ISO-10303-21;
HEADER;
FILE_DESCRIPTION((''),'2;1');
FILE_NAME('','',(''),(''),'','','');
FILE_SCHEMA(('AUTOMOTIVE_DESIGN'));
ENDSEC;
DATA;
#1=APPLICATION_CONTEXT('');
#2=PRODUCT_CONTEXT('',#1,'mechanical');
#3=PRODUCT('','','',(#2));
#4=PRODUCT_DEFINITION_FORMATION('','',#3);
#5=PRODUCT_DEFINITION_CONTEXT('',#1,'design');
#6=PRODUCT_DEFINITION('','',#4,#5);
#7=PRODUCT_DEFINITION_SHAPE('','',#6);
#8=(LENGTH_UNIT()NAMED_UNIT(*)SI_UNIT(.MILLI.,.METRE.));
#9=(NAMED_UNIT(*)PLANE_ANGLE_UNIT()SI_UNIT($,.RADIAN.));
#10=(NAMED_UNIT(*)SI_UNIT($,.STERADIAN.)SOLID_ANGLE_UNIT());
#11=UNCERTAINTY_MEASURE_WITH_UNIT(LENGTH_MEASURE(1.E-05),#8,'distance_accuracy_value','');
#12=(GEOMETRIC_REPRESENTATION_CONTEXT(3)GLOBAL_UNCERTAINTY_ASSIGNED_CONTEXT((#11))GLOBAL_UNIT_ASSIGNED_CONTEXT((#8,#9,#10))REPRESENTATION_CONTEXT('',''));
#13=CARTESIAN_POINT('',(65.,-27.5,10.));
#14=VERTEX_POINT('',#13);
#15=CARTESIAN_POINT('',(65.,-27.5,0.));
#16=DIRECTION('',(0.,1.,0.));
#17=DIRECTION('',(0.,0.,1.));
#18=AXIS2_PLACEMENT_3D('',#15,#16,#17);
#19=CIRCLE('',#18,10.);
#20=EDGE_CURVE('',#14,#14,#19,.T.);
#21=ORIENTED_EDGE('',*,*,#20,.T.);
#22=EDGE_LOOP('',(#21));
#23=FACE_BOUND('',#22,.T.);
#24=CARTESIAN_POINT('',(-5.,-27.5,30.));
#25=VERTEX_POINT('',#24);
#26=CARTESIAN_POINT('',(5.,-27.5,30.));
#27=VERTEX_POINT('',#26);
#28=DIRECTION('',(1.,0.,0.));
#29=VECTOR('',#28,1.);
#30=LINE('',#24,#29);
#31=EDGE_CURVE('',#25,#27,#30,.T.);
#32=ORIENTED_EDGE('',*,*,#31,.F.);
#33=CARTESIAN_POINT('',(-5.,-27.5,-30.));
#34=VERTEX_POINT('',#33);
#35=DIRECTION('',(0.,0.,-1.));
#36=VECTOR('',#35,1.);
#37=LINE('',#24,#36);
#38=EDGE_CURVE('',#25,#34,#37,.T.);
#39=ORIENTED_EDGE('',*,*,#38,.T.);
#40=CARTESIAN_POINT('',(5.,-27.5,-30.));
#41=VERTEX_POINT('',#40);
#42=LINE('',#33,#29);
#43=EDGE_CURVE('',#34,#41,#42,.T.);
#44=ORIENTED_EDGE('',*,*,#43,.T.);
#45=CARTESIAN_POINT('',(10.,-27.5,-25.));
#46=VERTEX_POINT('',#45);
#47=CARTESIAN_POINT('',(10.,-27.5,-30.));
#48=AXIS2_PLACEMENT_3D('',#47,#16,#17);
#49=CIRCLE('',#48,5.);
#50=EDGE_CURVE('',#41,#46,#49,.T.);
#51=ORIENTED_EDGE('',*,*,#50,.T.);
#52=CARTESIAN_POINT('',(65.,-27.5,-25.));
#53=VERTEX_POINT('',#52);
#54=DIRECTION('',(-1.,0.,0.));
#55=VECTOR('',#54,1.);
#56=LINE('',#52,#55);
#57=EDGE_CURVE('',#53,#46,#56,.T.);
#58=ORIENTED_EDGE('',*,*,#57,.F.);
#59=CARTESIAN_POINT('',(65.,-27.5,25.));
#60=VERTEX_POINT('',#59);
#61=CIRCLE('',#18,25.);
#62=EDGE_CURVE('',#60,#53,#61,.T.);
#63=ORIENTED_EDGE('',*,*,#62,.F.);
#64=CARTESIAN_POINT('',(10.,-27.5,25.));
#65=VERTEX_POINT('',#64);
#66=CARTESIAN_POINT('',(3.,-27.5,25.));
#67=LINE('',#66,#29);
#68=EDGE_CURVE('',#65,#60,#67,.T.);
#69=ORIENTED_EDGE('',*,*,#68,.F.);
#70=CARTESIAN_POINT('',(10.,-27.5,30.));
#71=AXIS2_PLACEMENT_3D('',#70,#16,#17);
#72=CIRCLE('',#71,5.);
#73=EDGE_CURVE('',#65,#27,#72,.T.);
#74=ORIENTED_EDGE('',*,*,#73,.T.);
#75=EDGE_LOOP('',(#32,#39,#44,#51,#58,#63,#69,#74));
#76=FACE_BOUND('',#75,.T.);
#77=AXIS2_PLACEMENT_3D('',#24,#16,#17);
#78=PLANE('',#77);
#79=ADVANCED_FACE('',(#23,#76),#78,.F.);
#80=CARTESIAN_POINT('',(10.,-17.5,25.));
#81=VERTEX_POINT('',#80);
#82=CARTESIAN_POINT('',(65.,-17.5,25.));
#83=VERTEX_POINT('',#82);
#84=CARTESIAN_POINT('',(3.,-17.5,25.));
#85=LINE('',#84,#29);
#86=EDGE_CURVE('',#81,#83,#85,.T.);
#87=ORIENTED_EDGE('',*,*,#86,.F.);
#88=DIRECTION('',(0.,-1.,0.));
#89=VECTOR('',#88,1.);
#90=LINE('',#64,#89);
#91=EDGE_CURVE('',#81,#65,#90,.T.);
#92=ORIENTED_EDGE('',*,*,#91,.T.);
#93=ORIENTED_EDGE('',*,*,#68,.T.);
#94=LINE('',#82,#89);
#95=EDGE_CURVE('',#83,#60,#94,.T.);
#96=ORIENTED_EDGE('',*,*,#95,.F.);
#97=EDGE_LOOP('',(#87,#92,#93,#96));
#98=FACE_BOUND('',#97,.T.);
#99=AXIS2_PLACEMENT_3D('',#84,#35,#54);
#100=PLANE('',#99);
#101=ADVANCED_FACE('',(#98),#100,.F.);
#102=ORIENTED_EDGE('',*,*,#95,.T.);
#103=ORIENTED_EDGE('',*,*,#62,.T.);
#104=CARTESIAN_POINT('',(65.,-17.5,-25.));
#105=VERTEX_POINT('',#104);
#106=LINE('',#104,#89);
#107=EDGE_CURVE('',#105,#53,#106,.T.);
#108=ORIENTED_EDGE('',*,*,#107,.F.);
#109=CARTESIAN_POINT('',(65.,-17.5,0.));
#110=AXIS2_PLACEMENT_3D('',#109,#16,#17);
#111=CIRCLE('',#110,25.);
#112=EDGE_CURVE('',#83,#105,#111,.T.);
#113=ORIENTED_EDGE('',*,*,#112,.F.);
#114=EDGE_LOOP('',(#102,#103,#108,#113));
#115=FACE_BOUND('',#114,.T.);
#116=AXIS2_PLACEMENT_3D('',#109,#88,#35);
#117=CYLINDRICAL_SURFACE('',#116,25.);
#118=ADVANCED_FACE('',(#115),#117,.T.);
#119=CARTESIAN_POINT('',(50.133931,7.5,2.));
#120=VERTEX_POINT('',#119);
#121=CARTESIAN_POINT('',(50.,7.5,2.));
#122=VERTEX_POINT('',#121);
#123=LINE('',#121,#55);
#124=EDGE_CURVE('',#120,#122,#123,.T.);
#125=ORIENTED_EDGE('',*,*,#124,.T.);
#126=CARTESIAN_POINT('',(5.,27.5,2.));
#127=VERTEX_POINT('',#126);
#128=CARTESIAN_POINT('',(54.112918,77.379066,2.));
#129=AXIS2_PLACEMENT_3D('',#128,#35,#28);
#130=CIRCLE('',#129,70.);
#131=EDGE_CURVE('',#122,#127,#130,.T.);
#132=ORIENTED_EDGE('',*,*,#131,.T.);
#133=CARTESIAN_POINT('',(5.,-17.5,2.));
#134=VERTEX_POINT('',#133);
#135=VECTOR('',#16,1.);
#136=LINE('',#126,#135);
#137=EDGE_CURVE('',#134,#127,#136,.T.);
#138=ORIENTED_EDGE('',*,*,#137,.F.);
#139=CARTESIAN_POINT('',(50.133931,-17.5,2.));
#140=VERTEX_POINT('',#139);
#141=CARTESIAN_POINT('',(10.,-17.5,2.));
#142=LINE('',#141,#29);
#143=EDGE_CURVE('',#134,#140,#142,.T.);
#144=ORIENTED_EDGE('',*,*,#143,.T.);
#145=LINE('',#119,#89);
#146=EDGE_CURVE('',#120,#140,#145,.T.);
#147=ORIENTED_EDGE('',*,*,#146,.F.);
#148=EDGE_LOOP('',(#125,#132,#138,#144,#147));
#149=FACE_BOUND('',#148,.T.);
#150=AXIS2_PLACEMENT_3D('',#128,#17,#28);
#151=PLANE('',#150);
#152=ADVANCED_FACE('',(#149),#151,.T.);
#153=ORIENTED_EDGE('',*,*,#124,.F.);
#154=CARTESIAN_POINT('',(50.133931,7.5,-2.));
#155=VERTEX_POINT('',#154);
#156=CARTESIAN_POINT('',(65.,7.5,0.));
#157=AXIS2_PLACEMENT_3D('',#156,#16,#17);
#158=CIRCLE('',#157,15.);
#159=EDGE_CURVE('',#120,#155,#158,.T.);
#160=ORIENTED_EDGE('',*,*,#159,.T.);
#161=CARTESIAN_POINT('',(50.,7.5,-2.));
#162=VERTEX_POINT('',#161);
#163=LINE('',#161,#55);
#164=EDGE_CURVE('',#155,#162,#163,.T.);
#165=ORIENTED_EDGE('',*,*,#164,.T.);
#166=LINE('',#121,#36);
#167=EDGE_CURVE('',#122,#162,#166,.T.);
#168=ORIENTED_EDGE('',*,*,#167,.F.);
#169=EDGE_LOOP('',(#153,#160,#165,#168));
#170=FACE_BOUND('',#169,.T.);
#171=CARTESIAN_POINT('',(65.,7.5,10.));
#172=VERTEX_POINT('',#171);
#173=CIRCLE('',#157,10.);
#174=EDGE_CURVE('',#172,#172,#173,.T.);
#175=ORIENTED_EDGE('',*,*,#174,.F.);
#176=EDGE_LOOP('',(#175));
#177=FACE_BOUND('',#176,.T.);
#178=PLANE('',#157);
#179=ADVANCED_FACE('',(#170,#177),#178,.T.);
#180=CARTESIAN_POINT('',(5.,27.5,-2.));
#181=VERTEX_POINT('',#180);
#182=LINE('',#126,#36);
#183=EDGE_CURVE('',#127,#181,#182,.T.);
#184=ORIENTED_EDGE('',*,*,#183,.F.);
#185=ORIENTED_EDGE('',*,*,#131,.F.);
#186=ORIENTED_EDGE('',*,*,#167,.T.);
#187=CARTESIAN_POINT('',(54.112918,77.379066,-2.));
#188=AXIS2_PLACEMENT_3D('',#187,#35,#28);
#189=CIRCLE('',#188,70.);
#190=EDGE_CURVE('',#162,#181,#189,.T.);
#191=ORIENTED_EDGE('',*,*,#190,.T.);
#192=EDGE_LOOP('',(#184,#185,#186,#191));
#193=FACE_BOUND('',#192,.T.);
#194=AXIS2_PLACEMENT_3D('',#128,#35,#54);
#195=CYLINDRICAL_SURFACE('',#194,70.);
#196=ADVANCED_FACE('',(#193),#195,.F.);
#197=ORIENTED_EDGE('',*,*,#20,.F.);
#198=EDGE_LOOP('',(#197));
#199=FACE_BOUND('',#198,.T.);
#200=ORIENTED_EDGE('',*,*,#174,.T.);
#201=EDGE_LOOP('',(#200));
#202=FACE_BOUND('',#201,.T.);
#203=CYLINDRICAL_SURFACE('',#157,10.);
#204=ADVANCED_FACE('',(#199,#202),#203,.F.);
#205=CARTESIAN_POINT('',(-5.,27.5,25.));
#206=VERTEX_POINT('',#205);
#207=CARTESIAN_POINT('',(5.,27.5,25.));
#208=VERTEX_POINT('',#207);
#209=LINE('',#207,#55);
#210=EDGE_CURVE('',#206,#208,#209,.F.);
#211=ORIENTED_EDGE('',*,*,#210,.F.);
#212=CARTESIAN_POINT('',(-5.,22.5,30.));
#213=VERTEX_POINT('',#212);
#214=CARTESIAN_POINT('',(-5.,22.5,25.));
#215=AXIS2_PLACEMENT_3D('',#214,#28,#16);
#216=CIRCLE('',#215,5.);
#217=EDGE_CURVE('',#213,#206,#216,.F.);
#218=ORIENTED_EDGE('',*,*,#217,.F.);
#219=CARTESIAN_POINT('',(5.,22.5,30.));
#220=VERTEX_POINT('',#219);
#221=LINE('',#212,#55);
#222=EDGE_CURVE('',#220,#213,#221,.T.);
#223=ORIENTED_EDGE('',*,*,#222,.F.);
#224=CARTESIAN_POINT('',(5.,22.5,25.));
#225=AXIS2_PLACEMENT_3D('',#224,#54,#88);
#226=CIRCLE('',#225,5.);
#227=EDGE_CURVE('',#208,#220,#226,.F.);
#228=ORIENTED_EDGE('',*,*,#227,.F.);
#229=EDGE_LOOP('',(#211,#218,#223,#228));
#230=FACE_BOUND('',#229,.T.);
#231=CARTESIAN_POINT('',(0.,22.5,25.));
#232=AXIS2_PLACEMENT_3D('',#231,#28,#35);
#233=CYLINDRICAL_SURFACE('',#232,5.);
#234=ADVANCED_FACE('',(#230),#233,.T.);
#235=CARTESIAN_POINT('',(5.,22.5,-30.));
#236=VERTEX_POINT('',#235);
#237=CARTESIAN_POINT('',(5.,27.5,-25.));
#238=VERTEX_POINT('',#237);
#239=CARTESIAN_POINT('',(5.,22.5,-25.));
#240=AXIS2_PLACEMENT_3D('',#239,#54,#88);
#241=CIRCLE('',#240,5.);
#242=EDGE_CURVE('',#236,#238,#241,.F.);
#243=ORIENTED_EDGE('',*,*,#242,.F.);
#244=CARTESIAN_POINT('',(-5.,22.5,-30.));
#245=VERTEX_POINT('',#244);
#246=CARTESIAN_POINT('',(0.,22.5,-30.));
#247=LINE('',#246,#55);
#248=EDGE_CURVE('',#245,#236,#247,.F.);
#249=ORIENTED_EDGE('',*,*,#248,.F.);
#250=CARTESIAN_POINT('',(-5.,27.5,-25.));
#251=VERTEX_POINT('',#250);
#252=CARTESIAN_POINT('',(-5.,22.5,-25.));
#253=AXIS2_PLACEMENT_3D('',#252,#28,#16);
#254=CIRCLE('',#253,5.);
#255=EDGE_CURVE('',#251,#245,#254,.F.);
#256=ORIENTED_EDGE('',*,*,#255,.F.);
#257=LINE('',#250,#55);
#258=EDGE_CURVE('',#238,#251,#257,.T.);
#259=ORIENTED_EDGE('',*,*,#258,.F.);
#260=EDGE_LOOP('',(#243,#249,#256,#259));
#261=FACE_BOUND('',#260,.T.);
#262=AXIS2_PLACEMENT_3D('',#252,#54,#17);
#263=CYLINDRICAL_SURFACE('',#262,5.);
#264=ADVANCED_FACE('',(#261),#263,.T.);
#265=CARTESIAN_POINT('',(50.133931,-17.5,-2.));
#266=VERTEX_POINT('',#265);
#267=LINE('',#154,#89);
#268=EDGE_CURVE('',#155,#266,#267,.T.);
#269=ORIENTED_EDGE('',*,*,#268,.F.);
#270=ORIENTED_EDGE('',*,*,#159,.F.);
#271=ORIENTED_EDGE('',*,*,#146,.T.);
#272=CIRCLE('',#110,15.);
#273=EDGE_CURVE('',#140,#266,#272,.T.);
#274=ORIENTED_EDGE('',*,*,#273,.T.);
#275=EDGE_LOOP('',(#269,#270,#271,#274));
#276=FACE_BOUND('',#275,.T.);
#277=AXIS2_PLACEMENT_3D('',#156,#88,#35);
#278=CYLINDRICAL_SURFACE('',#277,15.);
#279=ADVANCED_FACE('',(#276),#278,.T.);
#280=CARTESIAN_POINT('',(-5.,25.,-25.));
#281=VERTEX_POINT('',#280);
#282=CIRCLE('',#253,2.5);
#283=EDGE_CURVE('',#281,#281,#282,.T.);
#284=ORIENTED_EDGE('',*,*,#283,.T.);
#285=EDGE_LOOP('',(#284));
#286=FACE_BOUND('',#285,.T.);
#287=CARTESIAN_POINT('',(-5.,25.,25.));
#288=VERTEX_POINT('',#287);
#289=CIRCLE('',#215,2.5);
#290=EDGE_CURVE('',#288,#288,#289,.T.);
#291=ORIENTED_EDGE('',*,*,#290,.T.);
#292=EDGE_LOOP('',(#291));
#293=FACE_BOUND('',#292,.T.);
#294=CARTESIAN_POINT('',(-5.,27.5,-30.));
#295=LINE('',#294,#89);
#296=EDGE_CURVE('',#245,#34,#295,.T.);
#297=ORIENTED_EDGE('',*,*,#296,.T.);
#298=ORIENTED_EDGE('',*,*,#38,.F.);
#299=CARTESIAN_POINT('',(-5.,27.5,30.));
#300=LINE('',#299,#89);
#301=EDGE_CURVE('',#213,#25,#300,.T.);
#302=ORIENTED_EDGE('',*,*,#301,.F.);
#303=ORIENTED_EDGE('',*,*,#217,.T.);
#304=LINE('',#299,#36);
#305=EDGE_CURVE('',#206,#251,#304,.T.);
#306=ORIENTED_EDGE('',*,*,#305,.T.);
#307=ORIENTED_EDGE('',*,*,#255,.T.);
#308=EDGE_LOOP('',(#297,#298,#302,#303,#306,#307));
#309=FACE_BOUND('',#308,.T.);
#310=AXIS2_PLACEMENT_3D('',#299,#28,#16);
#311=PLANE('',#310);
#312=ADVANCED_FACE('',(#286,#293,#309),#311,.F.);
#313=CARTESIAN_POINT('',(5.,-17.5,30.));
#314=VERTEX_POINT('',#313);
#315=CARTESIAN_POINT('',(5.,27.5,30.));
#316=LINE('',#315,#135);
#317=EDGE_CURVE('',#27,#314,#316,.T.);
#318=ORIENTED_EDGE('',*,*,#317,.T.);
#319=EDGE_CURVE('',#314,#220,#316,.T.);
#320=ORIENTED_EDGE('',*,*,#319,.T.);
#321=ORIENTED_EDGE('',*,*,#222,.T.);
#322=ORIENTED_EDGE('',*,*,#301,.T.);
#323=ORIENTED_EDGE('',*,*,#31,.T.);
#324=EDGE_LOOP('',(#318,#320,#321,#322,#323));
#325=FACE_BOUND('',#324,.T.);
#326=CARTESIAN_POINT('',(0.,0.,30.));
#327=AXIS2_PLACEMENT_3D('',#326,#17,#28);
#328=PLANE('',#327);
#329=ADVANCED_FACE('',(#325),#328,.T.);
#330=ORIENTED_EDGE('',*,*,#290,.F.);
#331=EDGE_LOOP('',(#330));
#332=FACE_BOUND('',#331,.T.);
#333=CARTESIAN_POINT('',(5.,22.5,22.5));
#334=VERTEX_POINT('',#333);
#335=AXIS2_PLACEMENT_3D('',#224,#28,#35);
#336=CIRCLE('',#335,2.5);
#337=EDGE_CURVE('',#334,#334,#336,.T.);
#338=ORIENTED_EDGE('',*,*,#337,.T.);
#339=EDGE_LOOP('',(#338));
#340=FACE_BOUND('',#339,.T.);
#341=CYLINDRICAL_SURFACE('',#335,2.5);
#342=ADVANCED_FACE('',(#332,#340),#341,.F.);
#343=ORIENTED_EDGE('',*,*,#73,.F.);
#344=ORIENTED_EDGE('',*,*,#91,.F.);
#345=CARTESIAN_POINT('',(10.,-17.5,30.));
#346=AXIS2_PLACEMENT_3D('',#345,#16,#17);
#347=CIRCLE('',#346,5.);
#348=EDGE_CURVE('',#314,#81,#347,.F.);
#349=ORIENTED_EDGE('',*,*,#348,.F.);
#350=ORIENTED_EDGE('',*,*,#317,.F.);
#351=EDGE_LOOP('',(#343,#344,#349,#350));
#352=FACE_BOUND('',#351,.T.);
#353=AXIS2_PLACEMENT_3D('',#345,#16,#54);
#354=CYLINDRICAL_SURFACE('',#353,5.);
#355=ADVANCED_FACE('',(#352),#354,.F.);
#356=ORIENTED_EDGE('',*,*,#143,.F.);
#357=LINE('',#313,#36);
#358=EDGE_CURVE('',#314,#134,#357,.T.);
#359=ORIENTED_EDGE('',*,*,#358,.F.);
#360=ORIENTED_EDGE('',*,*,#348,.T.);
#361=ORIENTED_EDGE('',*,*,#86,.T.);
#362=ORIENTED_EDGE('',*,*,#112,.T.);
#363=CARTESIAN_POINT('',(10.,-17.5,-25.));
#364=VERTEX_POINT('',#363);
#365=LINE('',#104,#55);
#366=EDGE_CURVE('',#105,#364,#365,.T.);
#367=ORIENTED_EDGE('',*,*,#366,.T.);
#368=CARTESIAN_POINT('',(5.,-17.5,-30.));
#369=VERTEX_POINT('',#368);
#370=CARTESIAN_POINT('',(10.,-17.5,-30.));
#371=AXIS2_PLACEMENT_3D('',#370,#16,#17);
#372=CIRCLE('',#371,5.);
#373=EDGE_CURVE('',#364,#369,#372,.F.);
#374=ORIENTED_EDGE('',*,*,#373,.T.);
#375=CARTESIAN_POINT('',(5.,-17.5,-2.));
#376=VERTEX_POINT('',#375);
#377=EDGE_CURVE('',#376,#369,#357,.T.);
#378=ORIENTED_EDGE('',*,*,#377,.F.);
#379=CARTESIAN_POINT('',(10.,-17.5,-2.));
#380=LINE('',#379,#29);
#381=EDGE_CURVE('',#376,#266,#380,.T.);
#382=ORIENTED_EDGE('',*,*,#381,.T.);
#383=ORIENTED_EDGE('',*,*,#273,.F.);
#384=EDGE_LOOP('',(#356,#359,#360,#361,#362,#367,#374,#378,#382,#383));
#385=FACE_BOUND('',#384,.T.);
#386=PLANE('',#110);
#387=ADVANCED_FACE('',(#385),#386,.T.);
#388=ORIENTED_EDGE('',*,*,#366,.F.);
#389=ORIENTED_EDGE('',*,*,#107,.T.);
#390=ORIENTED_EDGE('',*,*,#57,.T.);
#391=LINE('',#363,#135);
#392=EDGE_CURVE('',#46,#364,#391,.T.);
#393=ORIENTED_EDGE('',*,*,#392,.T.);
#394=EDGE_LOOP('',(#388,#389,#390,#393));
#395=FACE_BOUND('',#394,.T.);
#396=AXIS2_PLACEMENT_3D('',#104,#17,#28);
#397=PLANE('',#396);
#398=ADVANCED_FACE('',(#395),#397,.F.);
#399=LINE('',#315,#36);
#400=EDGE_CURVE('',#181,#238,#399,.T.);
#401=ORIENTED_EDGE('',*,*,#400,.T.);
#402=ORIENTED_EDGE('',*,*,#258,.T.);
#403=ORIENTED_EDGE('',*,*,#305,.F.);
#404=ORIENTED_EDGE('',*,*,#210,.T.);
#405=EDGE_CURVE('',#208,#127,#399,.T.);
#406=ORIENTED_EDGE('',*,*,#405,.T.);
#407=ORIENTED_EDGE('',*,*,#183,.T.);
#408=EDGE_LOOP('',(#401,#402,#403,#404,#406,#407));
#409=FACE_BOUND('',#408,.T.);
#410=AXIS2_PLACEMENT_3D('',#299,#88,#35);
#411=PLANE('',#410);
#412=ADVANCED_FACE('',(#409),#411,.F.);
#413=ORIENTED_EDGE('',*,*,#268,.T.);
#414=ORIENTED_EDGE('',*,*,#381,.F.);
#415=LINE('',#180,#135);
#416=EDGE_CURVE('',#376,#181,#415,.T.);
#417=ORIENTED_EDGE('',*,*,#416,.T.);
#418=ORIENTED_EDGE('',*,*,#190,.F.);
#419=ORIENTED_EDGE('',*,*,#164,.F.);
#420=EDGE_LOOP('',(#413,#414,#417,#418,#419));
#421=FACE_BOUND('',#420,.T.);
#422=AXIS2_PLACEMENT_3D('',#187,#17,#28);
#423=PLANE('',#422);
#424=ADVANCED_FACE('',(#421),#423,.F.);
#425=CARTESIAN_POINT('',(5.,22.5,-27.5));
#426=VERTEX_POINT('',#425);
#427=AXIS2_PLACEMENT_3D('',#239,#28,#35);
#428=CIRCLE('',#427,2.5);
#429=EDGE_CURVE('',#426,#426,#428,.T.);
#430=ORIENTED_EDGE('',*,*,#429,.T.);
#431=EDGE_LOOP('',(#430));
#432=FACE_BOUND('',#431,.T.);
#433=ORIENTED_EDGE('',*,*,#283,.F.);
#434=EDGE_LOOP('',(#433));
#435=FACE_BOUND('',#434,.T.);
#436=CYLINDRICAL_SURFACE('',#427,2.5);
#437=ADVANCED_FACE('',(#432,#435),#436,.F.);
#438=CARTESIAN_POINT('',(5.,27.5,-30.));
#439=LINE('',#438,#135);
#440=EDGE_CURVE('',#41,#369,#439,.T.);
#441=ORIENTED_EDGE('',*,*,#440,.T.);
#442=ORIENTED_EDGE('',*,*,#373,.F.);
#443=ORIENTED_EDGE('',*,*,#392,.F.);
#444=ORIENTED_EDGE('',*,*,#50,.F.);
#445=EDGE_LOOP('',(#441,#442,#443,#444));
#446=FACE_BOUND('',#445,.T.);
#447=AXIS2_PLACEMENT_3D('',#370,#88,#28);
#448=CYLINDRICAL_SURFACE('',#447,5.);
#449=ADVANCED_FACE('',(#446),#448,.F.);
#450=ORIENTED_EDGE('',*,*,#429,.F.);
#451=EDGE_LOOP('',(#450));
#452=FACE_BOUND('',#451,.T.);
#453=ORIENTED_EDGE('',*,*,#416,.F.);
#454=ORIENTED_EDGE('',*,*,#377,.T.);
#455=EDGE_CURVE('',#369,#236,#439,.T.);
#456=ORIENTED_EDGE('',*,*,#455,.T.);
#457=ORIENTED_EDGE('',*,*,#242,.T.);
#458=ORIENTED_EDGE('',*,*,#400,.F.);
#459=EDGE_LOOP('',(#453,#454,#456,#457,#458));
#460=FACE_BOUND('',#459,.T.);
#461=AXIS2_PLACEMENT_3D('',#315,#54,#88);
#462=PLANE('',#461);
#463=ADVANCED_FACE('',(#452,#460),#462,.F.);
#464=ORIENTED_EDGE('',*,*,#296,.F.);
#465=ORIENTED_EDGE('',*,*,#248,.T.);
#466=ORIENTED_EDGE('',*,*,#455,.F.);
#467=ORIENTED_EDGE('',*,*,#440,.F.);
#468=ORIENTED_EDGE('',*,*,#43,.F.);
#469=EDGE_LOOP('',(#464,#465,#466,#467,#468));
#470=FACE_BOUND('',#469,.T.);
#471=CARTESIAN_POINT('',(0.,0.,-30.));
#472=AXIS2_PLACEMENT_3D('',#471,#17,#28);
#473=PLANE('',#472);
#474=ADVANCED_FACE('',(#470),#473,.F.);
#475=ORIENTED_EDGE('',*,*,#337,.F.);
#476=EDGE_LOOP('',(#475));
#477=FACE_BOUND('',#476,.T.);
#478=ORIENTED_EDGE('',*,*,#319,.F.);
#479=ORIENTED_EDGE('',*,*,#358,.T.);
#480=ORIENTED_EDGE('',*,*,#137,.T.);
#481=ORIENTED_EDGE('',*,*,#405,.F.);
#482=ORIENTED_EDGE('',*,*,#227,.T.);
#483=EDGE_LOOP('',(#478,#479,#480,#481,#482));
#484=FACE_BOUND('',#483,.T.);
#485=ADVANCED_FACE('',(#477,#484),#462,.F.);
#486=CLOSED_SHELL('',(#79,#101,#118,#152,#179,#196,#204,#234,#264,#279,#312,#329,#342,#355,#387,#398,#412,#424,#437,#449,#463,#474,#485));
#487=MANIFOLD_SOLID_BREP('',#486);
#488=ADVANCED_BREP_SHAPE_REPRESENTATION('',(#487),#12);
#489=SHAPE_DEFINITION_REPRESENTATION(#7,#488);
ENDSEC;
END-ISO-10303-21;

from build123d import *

# Parameters (mm, degrees)
SKETCH1_W           = 10
SKETCH1_H           = 55
BOSS_EXTRUDE1_DEPTH = 30
BOSS_EXTRUDE2_START = -27.5
BOSS_EXTRUDE2_DEPTH = 10
FILLET3_R           = 5
FILLET4_R           = 5
SKETCH3_R           = 15
BOSS_EXTRUDE3_DEPTH = 25
HOLE1_D             = 20
FILLET5_R           = 5
HOLE2_D             = 5
BOSS_EXTRUDE7_DEPTH = 2


with BuildPart() as part:
    # Sketch1 → Boss-Extrude1 (new, symmetric)
    with BuildSketch(Plane.XY):
        Rectangle(SKETCH1_W, SKETCH1_H)
    extrude(amount=BOSS_EXTRUDE1_DEPTH, both=True)

    # Sketch2 → Boss-Extrude2 (add)
    with BuildSketch(Plane(origin=(0, 0, 0), x_dir=(1, 0, 0), z_dir=(0, 1, 0)).offset(BOSS_EXTRUDE2_START)):
        with BuildLine():
            Line((65, 25), (3, 25))
            Line((3, 25), (3, -25))
            Line((3, -25), (65, -25))
            ThreePointArc((65, -25), (90, 0), (65, 25))
        make_face()
    extrude(amount=BOSS_EXTRUDE2_DEPTH)

    # Fillet3
    fillet3_edges = [part.edges().sort_by_distance(p)[0] for p in [
        (5, -22.5, 25),
    ]]
    fillet(fillet3_edges, radius=FILLET3_R - 0.0001)  # a hair under: the kernel refuses the full size

    # Fillet4
    fillet4_edges = [part.edges().sort_by_distance(p)[0] for p in [
        (5, -22.5, -25),
    ]]
    fillet(fillet4_edges, radius=FILLET4_R - 0.0001)  # a hair under: the kernel refuses the full size

    # Sketch3 → Boss-Extrude3 (add)
    with BuildSketch(Plane(origin=(0, -17.5, 0), x_dir=(1, 0, 0), z_dir=(0, 1, 0))):
        with Locations(Location((65, 0, 0), (0, 0, 270))):
            Circle(SKETCH3_R)
    extrude(amount=BOSS_EXTRUDE3_DEPTH)

    # Hole1 (through all)
    with Locations(Plane(origin=(0, 7.5, 0), x_dir=(1, 0, 0), z_dir=(0, 1, 0))):
        with Locations((65, 0)):
            Hole(HOLE1_D / 2)

    # Fillet5
    fillet5_edges = [part.edges().sort_by_distance(p)[0] for p in [
        (0, 27.5, -30),
        (0, 27.5, 30),
    ]]
    fillet(fillet5_edges, radius=FILLET5_R)

    # Hole2 (through all)
    with Locations(Plane(origin=(5, 0, 0), x_dir=(0, 0, -1), z_dir=(1, 0, 0))):
        with Locations((-25, 22.5), (25, 22.5)):
            Hole(HOLE2_D / 2)

    # Sketch9 → Boss-Extrude7 (add, symmetric)
    with BuildSketch(Plane.XY):
        with BuildLine():
            Line((51.5, 7.5), (51.5, -17.5))
            Line((51.5, -17.5), (10, -17.5))
            Line((10, -17.5), (5, -17.5))
            Line((5, -17.5), (3, -17.5))
            Line((3, -17.5), (3, 27.5))
            Line((3, 27.5), (5, 27.5))
            ThreePointArc((5, 27.5), (25.683225718, 13.412257866), (50, 7.5))
            Line((50, 7.5), (51.5, 7.5))
        make_face()
    extrude(amount=BOSS_EXTRUDE7_DEPTH, both=True)


solid = part.part
